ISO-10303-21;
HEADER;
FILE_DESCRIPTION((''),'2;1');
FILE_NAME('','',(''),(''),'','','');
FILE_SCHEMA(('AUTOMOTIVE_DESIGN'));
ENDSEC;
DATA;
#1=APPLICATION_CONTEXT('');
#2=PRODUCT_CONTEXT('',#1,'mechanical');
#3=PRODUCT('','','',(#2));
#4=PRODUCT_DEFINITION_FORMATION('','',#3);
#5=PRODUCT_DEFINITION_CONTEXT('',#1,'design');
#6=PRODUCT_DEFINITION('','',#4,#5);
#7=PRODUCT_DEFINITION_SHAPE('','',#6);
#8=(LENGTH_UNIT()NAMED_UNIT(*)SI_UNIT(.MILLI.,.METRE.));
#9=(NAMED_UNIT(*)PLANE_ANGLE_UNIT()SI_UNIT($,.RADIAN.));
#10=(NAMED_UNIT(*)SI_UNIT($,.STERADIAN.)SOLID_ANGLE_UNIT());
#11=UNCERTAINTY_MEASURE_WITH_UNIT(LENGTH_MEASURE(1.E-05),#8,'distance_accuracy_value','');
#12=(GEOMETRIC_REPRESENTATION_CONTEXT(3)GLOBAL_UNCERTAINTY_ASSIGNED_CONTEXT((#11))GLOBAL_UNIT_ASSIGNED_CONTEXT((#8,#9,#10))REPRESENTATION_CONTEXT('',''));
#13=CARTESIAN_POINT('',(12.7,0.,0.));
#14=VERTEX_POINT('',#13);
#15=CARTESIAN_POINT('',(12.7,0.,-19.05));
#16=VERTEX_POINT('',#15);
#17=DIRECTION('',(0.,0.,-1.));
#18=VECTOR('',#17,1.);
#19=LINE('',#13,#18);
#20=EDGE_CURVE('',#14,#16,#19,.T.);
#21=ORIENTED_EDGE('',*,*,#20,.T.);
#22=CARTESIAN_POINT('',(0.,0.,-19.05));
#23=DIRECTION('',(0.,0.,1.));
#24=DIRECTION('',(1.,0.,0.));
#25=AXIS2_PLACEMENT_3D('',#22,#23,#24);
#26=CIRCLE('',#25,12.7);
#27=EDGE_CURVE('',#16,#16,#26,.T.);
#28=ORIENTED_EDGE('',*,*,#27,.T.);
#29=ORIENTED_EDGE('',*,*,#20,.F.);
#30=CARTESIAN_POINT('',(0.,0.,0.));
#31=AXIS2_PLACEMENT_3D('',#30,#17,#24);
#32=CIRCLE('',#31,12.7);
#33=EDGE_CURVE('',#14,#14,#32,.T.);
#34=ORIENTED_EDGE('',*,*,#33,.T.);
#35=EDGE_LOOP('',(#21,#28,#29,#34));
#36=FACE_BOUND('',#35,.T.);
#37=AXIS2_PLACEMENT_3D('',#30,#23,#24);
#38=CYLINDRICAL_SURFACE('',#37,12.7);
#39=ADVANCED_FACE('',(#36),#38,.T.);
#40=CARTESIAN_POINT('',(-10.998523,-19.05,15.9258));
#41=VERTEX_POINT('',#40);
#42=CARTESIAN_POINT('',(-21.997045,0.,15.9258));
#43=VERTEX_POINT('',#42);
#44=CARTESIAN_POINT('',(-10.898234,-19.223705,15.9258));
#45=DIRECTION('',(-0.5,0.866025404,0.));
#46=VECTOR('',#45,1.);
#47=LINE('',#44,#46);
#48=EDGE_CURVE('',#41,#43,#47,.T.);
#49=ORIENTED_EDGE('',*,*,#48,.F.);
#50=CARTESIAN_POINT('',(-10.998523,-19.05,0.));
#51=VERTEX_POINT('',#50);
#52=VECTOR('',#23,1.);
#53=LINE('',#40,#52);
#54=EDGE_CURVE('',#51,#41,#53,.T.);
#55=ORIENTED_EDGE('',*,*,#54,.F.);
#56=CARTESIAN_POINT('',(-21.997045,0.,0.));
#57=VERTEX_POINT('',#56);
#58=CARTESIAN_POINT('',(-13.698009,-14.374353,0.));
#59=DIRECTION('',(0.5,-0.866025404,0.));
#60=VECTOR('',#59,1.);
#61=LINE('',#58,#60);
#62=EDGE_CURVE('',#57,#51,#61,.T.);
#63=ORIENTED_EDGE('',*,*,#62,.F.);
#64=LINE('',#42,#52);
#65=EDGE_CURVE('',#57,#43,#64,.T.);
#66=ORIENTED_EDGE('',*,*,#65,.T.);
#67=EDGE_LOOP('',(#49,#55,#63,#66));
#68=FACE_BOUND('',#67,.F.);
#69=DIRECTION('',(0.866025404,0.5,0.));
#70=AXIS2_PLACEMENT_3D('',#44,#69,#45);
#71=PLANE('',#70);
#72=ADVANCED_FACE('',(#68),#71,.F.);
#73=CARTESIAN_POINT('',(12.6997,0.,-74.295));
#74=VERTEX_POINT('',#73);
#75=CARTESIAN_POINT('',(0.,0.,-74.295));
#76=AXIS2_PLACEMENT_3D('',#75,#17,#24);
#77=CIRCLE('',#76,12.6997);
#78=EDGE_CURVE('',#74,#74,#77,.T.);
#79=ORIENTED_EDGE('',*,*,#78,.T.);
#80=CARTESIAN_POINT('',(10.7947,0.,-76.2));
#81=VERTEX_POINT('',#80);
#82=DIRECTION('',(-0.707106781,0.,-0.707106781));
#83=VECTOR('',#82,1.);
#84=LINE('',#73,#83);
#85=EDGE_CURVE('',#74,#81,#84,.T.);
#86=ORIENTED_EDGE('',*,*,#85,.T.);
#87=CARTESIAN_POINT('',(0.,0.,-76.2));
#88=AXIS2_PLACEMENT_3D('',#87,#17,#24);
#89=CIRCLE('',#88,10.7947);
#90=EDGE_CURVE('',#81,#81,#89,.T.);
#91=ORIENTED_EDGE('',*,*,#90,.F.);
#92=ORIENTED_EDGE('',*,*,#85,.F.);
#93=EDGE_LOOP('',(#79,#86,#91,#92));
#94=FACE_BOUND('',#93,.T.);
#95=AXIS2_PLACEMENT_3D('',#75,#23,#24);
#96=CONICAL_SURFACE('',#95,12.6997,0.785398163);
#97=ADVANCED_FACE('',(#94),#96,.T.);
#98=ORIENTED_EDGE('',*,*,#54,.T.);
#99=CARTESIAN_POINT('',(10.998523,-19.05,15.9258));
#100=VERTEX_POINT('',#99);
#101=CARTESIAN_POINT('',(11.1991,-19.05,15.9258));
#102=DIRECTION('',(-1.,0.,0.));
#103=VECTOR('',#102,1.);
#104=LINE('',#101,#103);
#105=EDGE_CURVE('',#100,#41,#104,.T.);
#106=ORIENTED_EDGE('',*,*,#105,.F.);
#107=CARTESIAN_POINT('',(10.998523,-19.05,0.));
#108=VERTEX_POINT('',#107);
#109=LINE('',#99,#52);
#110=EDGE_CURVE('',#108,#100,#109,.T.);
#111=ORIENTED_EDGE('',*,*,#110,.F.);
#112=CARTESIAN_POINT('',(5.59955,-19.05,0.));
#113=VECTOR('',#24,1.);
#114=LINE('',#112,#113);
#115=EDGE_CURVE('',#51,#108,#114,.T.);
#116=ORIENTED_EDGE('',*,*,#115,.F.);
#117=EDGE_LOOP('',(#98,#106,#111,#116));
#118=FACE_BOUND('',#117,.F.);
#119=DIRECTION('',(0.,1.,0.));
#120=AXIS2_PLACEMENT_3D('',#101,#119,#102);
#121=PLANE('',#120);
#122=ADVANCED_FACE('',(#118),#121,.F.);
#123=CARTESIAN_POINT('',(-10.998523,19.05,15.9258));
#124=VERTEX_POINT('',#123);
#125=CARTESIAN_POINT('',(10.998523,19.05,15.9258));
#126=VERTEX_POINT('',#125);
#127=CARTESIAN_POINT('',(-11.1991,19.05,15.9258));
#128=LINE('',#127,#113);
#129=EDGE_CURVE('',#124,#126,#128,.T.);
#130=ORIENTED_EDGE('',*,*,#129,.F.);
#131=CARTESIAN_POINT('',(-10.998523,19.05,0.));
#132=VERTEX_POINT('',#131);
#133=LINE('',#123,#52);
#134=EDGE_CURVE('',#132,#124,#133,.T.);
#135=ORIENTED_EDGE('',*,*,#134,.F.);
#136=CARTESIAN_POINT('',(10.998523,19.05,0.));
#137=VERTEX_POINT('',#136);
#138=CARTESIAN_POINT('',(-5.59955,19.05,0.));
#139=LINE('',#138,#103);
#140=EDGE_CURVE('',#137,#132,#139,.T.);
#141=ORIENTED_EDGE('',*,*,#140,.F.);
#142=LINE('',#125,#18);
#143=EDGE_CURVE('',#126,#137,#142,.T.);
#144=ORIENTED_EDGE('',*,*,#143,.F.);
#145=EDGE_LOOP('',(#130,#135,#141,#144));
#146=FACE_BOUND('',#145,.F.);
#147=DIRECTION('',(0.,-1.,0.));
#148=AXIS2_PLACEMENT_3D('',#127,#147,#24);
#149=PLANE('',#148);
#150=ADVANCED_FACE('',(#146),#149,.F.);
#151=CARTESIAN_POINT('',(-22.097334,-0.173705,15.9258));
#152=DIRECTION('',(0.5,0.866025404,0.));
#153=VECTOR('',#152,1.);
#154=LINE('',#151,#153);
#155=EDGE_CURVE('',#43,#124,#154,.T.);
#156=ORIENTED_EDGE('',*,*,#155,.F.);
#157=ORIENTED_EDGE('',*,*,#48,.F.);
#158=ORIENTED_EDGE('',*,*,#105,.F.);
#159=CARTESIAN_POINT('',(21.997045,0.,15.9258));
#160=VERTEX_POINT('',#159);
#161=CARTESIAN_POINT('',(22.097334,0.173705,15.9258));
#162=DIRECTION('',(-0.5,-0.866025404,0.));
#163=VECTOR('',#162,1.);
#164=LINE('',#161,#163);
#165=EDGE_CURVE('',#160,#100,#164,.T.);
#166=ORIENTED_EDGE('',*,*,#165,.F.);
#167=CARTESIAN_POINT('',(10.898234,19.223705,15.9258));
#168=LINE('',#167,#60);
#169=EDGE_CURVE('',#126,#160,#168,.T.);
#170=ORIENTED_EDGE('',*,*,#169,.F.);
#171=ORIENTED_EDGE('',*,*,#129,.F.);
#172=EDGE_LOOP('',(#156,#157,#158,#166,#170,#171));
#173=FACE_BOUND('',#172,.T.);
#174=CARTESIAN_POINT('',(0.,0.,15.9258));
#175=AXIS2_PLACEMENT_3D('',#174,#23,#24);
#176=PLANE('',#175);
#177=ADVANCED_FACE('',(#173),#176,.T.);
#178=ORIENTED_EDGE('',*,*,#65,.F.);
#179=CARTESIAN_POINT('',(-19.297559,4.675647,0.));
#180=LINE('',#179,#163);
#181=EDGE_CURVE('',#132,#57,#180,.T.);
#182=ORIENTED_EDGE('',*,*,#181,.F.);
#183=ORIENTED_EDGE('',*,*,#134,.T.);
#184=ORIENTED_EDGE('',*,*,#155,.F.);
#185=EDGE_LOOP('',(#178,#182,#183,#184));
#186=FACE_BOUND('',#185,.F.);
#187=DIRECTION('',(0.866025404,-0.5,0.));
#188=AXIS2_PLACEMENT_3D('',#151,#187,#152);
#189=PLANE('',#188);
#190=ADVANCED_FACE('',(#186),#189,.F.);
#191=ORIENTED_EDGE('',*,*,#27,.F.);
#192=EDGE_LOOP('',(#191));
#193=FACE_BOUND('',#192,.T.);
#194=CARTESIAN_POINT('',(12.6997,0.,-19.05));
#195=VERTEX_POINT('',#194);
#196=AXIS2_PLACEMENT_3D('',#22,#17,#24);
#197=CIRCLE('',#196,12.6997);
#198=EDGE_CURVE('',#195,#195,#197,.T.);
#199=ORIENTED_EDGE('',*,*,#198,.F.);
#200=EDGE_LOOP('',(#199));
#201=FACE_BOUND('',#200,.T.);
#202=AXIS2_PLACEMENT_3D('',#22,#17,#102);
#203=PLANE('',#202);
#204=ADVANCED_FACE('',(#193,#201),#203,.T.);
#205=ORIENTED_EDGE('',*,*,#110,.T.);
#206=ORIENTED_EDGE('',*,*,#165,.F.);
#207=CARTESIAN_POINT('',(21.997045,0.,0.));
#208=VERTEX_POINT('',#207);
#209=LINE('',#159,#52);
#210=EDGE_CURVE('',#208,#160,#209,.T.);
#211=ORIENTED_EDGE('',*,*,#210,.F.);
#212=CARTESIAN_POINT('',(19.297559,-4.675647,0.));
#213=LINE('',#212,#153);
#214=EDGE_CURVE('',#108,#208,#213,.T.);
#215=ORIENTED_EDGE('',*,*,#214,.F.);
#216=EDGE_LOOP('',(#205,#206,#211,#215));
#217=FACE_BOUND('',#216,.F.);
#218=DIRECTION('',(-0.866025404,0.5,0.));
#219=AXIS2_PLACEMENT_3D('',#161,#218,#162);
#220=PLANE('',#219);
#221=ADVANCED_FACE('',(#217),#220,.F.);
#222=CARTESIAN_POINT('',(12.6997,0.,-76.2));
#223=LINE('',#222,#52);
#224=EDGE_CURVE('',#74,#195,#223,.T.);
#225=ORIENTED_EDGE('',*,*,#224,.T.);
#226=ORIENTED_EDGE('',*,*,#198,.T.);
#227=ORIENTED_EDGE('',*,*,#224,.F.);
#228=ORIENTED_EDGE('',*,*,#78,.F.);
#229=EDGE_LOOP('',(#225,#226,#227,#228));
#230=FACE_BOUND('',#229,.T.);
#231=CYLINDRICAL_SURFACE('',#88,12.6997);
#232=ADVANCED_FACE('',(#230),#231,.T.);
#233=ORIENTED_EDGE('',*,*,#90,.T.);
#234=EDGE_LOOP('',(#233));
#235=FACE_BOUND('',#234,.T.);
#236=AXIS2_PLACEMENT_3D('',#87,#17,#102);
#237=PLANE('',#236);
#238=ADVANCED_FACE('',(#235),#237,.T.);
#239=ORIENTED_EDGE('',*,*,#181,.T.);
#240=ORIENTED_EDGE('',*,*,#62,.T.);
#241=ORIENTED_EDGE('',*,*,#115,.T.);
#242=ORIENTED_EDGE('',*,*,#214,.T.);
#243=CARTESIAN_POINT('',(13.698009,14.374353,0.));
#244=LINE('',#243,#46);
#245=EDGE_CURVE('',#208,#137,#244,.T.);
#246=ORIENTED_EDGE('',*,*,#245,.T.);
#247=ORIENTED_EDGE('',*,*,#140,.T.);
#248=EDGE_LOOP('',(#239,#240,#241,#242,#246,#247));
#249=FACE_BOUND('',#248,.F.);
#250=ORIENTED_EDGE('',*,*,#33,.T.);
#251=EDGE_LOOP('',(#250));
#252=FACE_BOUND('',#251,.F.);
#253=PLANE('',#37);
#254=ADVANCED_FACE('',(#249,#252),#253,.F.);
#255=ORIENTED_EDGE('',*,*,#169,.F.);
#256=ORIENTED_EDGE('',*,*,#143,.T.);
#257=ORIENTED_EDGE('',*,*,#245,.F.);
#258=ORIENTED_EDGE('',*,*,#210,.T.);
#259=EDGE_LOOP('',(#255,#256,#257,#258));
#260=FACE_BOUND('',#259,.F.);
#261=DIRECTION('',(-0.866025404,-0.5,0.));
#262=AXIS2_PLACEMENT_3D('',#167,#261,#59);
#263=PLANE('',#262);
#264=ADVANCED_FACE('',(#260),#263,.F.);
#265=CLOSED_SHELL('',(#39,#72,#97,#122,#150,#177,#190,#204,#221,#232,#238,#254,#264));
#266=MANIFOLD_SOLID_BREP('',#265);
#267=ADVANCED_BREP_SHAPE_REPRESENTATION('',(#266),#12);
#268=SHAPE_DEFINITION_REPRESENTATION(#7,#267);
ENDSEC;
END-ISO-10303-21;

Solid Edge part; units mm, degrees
sketch "Sketch1" plane through (0, 0, 0) normal (0, 0, 1) x (1, 0, 0)
  circle A0 centre (0, 0) radius 22.098
  dimension "D1" = 44.196
extrude "Protrusion1" add sketch "Sketch1" along normal blind 15.9258
sketch "Sketch2" plane through (0, 0, 0) normal (0, 0, -1) x (1, 0, 0)
  circle A0 centre (0, 0) radius 12.7
extrude "Protrusion2" add sketch "Sketch2" along normal blind 76.2
sketch "Sketch3" plane through (0, 0, -76.2) normal (0, 0, -1) x (1, 0, 0)
  circle A0 centre (0, 0) radius 12.6997
extrude "Cutout1" cut sketch "Sketch3" against normal blind 57.15 flip side to cut
chamfer "Chamfer_1" distance 1.905 angle 45 1 edges at (-12.6997, 0, -76.2)
sketch "Sketch4" plane through (0, 0, 15.9258) normal (0, 0, 1) x (1, 0, 0)
  line L0 (-11.1991, 19.05) -> (11.1991, 19.05)
  dimension "D1" = 38.1
extrude "Cutout2" cut sketch "Sketch4" against normal up to next material side at (0, 19.1, 15.9258)
pattern_circular "Pattern1" count 6 over 360 about axis through (0, 0, 15.9258) along (0, 0, 1) of "Cutout2"
properties part number "24102127"
